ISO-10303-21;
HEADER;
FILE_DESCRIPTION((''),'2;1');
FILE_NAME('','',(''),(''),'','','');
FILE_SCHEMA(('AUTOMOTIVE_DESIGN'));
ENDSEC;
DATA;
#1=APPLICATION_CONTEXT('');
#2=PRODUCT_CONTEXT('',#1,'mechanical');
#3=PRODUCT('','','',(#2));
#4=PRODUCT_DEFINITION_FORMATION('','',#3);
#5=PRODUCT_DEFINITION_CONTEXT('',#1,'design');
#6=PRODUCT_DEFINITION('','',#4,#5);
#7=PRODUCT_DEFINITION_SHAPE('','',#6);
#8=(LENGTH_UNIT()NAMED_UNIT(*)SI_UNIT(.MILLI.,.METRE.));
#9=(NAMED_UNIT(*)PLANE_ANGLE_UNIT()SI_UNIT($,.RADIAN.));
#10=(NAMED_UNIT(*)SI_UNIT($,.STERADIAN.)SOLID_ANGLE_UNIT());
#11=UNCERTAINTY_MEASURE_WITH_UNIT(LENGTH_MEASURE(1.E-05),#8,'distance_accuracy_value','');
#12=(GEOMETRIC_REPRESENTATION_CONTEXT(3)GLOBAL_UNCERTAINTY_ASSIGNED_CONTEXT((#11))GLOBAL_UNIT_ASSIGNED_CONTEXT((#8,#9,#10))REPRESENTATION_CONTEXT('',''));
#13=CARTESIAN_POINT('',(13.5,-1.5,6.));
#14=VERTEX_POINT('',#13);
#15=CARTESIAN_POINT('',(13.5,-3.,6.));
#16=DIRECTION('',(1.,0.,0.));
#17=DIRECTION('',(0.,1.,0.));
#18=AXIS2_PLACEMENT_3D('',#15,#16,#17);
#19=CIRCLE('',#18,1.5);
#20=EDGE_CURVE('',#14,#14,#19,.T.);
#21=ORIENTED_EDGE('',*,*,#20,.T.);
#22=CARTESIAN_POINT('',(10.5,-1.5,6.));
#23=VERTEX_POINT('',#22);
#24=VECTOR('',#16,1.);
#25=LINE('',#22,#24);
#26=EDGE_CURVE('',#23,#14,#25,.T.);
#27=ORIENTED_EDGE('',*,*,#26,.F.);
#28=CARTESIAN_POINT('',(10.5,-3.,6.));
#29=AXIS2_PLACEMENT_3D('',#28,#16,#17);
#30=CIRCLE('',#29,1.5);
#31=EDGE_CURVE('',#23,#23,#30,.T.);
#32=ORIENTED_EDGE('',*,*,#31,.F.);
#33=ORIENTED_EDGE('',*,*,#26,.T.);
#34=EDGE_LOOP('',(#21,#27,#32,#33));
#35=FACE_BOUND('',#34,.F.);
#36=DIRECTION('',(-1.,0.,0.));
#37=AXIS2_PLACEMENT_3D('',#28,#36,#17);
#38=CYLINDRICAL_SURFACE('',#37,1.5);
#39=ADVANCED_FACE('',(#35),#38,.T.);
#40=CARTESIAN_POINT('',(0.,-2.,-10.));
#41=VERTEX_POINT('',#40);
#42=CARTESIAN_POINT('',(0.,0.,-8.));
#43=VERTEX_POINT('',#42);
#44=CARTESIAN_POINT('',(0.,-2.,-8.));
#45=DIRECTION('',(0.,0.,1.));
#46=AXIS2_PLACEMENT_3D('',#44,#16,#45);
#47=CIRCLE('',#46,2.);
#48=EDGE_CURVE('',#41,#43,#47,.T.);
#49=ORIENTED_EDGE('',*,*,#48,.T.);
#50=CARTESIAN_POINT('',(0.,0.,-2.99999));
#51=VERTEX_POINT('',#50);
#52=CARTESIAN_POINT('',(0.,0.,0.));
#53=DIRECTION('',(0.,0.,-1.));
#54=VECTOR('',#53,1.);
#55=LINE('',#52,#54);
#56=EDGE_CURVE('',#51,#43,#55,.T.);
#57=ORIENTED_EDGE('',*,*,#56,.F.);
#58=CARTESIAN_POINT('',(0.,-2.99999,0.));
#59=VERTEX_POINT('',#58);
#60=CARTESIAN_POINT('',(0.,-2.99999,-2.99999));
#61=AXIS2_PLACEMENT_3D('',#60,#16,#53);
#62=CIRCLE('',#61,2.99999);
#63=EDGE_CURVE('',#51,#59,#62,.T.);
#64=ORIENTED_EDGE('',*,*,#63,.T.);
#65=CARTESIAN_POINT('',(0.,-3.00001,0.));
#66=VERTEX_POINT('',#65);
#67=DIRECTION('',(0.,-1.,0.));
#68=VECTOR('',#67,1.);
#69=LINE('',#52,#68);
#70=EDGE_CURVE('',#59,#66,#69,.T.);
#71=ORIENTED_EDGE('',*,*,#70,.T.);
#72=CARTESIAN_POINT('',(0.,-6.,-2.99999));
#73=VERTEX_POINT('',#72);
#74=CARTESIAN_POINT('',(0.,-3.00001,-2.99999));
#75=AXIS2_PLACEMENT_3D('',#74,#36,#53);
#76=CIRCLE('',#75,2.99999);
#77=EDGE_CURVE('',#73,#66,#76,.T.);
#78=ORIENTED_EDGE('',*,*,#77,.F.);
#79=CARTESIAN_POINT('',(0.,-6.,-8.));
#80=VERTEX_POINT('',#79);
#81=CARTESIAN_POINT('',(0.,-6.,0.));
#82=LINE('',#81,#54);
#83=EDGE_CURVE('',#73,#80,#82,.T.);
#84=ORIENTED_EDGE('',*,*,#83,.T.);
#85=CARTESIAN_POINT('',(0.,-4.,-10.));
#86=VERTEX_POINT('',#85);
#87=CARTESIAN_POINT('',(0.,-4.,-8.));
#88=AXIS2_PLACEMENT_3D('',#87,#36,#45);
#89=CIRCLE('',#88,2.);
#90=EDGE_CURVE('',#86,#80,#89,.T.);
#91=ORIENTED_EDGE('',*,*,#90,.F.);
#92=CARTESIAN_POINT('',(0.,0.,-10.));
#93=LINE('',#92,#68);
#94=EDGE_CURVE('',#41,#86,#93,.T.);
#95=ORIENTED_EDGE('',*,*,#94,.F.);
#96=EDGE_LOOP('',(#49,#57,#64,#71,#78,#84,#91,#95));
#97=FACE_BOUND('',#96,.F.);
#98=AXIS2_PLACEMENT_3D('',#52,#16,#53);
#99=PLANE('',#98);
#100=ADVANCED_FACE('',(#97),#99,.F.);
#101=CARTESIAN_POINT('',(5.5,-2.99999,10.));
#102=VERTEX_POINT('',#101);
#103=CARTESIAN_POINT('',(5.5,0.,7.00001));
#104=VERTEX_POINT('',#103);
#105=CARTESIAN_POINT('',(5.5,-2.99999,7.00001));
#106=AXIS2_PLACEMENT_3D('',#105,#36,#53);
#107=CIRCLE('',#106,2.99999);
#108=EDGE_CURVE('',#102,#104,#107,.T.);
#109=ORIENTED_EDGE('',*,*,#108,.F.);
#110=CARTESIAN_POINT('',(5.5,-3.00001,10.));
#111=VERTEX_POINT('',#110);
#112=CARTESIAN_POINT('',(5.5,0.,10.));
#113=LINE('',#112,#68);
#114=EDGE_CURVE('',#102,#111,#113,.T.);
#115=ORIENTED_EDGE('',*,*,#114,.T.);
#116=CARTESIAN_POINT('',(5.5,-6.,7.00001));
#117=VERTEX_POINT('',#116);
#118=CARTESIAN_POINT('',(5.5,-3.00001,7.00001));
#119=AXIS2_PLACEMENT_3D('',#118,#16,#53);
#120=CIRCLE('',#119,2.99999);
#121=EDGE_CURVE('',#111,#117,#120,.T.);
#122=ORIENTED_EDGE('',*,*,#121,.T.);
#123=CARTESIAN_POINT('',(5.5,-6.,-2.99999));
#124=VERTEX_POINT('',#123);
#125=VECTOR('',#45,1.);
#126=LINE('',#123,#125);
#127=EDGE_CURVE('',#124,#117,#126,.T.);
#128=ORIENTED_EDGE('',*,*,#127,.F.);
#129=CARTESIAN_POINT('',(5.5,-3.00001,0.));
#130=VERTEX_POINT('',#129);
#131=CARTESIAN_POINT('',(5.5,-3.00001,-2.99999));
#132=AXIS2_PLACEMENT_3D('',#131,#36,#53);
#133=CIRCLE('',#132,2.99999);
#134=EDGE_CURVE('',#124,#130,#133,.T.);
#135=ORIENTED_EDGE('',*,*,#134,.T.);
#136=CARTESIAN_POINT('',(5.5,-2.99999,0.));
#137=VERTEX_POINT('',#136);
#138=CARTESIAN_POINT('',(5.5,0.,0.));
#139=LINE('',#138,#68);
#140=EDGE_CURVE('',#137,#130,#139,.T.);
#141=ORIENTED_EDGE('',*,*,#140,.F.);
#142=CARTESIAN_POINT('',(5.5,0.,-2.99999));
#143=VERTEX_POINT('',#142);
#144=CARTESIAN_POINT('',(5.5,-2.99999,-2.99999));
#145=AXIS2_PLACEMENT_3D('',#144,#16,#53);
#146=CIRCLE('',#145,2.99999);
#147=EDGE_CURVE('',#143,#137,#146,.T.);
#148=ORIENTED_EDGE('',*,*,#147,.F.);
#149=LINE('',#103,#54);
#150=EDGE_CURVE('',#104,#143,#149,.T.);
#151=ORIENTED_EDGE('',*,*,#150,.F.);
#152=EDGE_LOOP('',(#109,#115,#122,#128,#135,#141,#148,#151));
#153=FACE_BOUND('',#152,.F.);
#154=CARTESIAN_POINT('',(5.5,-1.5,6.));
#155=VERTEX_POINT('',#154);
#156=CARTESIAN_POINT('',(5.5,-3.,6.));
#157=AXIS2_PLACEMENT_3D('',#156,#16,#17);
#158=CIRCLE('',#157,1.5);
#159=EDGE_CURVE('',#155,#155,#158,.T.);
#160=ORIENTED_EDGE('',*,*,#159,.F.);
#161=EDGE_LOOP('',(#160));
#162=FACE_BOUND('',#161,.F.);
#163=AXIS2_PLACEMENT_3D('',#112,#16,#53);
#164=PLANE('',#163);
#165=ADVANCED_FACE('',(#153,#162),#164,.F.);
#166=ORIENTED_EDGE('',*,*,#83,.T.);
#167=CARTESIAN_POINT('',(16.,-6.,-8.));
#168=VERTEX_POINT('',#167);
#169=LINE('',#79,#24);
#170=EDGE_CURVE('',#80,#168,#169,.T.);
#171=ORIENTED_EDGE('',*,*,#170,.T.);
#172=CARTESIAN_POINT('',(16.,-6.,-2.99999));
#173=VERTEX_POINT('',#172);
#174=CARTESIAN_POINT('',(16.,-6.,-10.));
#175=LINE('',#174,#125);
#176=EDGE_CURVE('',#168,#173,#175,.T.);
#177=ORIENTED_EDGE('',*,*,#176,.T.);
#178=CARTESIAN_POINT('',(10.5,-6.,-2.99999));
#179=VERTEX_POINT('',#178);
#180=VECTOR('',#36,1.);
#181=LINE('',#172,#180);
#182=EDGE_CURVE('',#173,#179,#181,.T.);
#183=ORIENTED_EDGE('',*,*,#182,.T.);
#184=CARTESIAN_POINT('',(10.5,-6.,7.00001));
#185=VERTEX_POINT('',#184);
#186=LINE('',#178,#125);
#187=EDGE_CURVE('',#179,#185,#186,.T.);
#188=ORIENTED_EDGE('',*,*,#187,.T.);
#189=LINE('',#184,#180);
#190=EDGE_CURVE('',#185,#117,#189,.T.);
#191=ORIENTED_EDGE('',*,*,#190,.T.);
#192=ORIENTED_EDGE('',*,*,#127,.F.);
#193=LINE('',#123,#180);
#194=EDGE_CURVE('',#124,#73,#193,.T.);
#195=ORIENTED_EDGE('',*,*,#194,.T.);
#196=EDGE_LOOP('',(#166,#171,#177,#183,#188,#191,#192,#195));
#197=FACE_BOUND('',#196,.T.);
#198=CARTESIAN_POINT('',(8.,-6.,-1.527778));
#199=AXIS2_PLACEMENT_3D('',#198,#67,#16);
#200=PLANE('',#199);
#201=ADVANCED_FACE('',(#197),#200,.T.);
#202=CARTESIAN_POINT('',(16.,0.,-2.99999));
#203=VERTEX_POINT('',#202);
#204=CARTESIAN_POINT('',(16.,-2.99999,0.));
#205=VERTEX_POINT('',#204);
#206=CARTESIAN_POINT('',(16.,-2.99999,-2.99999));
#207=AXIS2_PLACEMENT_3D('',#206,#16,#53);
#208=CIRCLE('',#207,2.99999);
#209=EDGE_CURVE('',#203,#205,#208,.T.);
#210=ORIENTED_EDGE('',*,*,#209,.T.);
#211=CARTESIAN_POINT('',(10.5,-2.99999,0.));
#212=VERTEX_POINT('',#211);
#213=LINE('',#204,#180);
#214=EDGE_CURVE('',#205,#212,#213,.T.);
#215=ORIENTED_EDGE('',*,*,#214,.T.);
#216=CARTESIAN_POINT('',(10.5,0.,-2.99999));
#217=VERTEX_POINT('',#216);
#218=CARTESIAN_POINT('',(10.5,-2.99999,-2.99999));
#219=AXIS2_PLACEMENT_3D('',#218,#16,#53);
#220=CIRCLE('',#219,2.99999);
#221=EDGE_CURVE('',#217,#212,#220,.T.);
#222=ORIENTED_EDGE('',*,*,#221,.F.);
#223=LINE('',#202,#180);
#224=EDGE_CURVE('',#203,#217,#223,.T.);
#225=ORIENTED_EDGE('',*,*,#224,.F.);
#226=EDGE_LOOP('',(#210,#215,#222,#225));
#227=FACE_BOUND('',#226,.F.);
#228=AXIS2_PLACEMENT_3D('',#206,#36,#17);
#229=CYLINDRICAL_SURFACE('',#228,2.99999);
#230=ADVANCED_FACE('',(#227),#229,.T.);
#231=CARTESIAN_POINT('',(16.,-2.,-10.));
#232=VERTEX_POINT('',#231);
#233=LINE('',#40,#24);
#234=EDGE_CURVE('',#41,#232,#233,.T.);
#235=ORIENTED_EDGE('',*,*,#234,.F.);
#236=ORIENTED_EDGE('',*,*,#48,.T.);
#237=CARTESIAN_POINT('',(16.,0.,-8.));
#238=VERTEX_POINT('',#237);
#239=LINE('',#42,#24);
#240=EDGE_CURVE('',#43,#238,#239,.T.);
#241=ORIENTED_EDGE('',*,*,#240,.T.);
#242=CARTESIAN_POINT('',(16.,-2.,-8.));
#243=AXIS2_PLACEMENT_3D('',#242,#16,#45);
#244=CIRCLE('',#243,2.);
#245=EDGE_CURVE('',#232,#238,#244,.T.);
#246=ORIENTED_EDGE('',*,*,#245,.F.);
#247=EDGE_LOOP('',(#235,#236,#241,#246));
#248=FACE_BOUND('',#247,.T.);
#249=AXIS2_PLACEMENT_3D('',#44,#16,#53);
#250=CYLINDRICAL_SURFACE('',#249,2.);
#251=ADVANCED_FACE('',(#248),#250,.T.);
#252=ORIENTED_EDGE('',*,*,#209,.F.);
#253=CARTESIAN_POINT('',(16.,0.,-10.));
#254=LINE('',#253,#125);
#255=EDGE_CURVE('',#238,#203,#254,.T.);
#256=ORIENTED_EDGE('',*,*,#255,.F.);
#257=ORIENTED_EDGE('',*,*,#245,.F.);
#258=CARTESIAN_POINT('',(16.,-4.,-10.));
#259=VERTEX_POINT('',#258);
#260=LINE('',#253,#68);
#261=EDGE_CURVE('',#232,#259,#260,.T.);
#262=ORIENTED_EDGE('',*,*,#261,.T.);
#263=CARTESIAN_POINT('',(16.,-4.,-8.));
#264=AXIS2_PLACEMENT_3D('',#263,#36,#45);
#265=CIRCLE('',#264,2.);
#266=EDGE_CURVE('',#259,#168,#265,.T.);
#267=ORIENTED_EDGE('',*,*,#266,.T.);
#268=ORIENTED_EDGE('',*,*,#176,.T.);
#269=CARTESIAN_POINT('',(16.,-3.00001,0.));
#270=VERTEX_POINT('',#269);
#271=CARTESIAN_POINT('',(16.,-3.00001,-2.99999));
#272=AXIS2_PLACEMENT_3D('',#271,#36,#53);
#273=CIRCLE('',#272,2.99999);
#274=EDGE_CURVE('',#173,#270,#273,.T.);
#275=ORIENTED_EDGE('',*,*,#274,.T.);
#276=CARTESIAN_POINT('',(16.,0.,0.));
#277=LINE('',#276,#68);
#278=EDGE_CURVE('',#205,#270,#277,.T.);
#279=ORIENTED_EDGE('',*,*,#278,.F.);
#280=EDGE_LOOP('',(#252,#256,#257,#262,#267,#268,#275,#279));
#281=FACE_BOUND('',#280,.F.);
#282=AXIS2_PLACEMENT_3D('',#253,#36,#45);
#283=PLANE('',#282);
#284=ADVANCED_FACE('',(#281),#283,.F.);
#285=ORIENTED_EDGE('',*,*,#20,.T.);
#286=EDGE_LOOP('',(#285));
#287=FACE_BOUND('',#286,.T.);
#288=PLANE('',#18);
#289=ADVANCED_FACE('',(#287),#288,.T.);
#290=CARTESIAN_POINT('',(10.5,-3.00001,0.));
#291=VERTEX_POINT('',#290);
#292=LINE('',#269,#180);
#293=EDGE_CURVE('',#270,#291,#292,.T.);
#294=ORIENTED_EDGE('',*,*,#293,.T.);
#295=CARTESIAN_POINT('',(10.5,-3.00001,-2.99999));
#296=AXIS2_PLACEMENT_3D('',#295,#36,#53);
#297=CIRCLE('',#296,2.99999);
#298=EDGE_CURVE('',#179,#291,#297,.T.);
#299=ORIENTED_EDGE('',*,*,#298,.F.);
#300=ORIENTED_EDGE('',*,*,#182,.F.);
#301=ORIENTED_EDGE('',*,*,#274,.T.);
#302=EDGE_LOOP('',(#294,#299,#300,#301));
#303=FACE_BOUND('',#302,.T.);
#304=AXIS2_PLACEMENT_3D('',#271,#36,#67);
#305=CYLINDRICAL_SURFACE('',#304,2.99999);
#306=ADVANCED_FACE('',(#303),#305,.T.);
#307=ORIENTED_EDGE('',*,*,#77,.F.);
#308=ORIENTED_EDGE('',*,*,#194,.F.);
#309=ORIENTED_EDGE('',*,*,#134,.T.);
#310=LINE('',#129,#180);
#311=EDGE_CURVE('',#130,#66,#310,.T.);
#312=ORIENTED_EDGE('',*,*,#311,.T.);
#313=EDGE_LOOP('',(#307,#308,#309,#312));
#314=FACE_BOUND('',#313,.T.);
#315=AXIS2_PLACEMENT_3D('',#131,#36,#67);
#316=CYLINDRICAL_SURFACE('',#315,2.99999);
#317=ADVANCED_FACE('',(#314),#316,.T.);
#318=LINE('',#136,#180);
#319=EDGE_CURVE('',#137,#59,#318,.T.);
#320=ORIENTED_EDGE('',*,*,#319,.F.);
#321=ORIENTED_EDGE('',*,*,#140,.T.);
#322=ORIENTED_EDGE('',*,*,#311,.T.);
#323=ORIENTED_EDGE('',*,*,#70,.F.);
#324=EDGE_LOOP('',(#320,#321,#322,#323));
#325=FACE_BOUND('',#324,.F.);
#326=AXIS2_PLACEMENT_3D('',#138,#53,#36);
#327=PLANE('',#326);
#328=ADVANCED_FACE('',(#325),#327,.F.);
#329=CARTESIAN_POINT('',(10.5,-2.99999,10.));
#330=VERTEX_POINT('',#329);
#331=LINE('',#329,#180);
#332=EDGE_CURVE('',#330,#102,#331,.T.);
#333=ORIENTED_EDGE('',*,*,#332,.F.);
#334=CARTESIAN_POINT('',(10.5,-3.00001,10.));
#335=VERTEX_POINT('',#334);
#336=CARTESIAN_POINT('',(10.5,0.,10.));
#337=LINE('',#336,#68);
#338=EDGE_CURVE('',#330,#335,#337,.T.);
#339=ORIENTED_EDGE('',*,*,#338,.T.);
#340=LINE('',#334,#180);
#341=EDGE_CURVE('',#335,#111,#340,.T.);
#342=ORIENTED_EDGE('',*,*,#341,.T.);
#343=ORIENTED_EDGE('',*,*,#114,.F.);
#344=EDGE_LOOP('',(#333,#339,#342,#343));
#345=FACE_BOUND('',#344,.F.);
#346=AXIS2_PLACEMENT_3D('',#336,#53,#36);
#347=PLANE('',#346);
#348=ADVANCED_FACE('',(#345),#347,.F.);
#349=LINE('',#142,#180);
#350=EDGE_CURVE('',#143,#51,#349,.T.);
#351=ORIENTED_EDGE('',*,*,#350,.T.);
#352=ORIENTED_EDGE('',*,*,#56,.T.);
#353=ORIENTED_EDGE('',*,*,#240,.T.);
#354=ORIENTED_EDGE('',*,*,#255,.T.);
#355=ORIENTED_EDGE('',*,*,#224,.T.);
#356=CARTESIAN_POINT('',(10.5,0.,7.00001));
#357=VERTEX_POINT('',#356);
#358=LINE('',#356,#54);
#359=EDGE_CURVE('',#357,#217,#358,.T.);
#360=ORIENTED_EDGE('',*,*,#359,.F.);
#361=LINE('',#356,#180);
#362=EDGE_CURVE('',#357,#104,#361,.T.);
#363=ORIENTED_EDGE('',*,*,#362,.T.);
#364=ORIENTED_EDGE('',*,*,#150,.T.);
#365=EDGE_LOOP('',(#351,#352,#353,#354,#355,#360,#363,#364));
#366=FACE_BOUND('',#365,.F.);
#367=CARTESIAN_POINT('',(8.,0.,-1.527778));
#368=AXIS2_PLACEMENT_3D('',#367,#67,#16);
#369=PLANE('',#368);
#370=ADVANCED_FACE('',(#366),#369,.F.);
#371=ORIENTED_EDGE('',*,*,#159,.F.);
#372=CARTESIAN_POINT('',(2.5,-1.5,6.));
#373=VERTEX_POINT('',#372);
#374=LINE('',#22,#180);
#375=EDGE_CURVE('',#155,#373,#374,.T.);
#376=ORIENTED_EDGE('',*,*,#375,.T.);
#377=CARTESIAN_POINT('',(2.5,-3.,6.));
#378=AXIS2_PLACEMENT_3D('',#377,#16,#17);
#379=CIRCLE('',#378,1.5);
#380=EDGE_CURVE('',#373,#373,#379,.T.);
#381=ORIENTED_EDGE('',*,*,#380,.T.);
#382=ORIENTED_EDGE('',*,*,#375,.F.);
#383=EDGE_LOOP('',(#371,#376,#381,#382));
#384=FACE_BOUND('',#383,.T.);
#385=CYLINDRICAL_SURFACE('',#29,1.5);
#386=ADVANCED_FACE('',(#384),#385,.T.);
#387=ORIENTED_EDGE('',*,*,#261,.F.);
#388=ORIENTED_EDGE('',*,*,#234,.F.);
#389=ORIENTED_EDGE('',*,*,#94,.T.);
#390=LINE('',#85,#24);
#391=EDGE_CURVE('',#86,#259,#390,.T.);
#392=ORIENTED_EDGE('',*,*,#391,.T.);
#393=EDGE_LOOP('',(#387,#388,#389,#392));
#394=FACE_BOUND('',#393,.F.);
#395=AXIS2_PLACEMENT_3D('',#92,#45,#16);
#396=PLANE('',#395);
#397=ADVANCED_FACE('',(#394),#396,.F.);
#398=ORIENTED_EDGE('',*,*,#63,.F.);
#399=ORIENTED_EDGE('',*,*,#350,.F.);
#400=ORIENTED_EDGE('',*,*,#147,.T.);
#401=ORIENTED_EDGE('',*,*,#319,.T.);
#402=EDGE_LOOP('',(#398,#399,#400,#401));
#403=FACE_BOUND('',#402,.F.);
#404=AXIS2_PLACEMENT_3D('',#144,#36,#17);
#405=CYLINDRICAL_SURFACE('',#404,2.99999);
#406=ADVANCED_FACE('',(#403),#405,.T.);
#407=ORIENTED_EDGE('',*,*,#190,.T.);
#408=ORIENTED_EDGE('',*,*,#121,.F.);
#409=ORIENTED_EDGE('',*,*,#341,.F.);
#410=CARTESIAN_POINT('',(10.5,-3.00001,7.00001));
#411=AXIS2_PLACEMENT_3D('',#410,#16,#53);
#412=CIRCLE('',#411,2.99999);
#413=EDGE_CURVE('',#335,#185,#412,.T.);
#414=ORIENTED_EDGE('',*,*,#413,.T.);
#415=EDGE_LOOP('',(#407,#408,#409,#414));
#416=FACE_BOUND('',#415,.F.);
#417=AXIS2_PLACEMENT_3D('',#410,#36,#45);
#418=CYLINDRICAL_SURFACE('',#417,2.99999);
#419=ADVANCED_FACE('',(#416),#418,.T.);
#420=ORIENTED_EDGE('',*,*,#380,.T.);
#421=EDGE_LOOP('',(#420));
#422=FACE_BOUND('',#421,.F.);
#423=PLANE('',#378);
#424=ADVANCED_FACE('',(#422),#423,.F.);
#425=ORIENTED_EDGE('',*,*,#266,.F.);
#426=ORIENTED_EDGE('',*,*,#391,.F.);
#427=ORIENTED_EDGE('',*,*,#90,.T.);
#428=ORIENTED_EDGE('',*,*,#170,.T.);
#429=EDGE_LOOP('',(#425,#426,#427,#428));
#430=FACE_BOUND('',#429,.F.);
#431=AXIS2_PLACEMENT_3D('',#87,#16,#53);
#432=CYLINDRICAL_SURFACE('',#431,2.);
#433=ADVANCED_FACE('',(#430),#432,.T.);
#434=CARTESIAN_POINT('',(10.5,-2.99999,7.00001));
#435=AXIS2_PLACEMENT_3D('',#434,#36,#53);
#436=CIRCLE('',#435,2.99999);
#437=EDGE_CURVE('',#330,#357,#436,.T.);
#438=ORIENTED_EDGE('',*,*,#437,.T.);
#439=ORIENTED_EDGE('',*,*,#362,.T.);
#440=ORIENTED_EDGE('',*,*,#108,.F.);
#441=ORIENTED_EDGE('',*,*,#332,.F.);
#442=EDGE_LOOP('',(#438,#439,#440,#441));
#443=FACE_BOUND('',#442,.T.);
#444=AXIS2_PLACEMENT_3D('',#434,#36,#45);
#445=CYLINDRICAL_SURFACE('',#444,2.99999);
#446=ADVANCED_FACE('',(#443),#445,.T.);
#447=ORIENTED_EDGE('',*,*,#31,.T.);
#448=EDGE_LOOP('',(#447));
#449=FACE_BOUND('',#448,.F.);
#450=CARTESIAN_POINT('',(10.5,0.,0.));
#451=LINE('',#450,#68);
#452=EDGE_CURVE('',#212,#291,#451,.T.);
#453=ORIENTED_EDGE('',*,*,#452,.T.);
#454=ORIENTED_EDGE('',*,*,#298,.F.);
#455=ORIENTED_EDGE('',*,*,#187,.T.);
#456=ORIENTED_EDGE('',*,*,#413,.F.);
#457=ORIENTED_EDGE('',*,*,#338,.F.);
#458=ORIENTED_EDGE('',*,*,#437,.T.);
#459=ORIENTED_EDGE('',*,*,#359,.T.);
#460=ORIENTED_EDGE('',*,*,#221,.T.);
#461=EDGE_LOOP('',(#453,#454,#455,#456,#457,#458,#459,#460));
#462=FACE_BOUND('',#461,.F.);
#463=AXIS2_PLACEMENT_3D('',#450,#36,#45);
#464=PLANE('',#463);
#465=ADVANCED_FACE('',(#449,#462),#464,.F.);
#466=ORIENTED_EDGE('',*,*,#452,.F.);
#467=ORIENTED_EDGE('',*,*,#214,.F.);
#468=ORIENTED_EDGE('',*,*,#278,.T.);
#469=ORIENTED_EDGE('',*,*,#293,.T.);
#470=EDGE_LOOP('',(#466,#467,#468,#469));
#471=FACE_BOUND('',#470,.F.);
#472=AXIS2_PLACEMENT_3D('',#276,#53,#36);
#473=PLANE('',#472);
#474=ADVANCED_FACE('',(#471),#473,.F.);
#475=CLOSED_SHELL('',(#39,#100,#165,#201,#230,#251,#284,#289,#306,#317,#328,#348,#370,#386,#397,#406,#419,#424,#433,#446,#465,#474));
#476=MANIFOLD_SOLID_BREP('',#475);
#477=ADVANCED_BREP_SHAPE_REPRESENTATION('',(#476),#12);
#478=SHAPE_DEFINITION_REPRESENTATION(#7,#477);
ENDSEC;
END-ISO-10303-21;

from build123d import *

# Parameters (mm, degrees)
F1_DEPTH      = 6
F2_R          = 1.5
F3_DEPTH      = 3
F3_DEPTH_BACK = 8
F4_R          = 2.99999
F5_R          = 2.99999
F6_R          = 2


# Not quite as in the source:
# - a fillet or chamfer is up to 0.001 mm smaller than in the source, because OpenCascade refuses the exact size


with BuildPart() as f1:
    # F0 (on Front) → F1 (new body)
    with BuildSketch(Plane.XZ):
        Polygon((5.5, 0), (0, 0), (0, -10), (16, -10), (16, 0), (10.5, 0), (10.5, 10), (5.5, 10), align=None)
    extrude(amount=F1_DEPTH)

    # F2 (on face) → F3 (join, two sides)
    with BuildSketch(Plane.YZ.offset(10.5)) as f3_sk:
        with Locations((-3, 6)):
            Circle(F2_R)
    extrude(amount=F3_DEPTH)
    extrude(f3_sk.sketch, amount=-F3_DEPTH_BACK)

    # F4 (radius 3 in the source; OpenCascade refuses exactly that, so slightly less here)
    f4_edges = [f1.edges().sort_by_distance(p)[0] for p in [
        (8, -6, 10),
        (8, 0, 10),
    ]]
    fillet(f4_edges, radius=F4_R)

    # F5 (radius 3 in the source; OpenCascade refuses exactly that, so slightly less here)
    f5_edges = [f1.edges().sort_by_distance(p)[0] for p in [
        (2.75, -6, 0),
        (2.75, 0, 0),
        (13.25, -6, 0),
        (13.25, 0, 0),
    ]]
    fillet(f5_edges, radius=F5_R)

    # F6
    f6_edges = [f1.edges().sort_by_distance(p)[0] for p in [
        (8, -6, -10),
        (8, 0, -10),
    ]]
    fillet(f6_edges, radius=F6_R)


solid = f1.part
